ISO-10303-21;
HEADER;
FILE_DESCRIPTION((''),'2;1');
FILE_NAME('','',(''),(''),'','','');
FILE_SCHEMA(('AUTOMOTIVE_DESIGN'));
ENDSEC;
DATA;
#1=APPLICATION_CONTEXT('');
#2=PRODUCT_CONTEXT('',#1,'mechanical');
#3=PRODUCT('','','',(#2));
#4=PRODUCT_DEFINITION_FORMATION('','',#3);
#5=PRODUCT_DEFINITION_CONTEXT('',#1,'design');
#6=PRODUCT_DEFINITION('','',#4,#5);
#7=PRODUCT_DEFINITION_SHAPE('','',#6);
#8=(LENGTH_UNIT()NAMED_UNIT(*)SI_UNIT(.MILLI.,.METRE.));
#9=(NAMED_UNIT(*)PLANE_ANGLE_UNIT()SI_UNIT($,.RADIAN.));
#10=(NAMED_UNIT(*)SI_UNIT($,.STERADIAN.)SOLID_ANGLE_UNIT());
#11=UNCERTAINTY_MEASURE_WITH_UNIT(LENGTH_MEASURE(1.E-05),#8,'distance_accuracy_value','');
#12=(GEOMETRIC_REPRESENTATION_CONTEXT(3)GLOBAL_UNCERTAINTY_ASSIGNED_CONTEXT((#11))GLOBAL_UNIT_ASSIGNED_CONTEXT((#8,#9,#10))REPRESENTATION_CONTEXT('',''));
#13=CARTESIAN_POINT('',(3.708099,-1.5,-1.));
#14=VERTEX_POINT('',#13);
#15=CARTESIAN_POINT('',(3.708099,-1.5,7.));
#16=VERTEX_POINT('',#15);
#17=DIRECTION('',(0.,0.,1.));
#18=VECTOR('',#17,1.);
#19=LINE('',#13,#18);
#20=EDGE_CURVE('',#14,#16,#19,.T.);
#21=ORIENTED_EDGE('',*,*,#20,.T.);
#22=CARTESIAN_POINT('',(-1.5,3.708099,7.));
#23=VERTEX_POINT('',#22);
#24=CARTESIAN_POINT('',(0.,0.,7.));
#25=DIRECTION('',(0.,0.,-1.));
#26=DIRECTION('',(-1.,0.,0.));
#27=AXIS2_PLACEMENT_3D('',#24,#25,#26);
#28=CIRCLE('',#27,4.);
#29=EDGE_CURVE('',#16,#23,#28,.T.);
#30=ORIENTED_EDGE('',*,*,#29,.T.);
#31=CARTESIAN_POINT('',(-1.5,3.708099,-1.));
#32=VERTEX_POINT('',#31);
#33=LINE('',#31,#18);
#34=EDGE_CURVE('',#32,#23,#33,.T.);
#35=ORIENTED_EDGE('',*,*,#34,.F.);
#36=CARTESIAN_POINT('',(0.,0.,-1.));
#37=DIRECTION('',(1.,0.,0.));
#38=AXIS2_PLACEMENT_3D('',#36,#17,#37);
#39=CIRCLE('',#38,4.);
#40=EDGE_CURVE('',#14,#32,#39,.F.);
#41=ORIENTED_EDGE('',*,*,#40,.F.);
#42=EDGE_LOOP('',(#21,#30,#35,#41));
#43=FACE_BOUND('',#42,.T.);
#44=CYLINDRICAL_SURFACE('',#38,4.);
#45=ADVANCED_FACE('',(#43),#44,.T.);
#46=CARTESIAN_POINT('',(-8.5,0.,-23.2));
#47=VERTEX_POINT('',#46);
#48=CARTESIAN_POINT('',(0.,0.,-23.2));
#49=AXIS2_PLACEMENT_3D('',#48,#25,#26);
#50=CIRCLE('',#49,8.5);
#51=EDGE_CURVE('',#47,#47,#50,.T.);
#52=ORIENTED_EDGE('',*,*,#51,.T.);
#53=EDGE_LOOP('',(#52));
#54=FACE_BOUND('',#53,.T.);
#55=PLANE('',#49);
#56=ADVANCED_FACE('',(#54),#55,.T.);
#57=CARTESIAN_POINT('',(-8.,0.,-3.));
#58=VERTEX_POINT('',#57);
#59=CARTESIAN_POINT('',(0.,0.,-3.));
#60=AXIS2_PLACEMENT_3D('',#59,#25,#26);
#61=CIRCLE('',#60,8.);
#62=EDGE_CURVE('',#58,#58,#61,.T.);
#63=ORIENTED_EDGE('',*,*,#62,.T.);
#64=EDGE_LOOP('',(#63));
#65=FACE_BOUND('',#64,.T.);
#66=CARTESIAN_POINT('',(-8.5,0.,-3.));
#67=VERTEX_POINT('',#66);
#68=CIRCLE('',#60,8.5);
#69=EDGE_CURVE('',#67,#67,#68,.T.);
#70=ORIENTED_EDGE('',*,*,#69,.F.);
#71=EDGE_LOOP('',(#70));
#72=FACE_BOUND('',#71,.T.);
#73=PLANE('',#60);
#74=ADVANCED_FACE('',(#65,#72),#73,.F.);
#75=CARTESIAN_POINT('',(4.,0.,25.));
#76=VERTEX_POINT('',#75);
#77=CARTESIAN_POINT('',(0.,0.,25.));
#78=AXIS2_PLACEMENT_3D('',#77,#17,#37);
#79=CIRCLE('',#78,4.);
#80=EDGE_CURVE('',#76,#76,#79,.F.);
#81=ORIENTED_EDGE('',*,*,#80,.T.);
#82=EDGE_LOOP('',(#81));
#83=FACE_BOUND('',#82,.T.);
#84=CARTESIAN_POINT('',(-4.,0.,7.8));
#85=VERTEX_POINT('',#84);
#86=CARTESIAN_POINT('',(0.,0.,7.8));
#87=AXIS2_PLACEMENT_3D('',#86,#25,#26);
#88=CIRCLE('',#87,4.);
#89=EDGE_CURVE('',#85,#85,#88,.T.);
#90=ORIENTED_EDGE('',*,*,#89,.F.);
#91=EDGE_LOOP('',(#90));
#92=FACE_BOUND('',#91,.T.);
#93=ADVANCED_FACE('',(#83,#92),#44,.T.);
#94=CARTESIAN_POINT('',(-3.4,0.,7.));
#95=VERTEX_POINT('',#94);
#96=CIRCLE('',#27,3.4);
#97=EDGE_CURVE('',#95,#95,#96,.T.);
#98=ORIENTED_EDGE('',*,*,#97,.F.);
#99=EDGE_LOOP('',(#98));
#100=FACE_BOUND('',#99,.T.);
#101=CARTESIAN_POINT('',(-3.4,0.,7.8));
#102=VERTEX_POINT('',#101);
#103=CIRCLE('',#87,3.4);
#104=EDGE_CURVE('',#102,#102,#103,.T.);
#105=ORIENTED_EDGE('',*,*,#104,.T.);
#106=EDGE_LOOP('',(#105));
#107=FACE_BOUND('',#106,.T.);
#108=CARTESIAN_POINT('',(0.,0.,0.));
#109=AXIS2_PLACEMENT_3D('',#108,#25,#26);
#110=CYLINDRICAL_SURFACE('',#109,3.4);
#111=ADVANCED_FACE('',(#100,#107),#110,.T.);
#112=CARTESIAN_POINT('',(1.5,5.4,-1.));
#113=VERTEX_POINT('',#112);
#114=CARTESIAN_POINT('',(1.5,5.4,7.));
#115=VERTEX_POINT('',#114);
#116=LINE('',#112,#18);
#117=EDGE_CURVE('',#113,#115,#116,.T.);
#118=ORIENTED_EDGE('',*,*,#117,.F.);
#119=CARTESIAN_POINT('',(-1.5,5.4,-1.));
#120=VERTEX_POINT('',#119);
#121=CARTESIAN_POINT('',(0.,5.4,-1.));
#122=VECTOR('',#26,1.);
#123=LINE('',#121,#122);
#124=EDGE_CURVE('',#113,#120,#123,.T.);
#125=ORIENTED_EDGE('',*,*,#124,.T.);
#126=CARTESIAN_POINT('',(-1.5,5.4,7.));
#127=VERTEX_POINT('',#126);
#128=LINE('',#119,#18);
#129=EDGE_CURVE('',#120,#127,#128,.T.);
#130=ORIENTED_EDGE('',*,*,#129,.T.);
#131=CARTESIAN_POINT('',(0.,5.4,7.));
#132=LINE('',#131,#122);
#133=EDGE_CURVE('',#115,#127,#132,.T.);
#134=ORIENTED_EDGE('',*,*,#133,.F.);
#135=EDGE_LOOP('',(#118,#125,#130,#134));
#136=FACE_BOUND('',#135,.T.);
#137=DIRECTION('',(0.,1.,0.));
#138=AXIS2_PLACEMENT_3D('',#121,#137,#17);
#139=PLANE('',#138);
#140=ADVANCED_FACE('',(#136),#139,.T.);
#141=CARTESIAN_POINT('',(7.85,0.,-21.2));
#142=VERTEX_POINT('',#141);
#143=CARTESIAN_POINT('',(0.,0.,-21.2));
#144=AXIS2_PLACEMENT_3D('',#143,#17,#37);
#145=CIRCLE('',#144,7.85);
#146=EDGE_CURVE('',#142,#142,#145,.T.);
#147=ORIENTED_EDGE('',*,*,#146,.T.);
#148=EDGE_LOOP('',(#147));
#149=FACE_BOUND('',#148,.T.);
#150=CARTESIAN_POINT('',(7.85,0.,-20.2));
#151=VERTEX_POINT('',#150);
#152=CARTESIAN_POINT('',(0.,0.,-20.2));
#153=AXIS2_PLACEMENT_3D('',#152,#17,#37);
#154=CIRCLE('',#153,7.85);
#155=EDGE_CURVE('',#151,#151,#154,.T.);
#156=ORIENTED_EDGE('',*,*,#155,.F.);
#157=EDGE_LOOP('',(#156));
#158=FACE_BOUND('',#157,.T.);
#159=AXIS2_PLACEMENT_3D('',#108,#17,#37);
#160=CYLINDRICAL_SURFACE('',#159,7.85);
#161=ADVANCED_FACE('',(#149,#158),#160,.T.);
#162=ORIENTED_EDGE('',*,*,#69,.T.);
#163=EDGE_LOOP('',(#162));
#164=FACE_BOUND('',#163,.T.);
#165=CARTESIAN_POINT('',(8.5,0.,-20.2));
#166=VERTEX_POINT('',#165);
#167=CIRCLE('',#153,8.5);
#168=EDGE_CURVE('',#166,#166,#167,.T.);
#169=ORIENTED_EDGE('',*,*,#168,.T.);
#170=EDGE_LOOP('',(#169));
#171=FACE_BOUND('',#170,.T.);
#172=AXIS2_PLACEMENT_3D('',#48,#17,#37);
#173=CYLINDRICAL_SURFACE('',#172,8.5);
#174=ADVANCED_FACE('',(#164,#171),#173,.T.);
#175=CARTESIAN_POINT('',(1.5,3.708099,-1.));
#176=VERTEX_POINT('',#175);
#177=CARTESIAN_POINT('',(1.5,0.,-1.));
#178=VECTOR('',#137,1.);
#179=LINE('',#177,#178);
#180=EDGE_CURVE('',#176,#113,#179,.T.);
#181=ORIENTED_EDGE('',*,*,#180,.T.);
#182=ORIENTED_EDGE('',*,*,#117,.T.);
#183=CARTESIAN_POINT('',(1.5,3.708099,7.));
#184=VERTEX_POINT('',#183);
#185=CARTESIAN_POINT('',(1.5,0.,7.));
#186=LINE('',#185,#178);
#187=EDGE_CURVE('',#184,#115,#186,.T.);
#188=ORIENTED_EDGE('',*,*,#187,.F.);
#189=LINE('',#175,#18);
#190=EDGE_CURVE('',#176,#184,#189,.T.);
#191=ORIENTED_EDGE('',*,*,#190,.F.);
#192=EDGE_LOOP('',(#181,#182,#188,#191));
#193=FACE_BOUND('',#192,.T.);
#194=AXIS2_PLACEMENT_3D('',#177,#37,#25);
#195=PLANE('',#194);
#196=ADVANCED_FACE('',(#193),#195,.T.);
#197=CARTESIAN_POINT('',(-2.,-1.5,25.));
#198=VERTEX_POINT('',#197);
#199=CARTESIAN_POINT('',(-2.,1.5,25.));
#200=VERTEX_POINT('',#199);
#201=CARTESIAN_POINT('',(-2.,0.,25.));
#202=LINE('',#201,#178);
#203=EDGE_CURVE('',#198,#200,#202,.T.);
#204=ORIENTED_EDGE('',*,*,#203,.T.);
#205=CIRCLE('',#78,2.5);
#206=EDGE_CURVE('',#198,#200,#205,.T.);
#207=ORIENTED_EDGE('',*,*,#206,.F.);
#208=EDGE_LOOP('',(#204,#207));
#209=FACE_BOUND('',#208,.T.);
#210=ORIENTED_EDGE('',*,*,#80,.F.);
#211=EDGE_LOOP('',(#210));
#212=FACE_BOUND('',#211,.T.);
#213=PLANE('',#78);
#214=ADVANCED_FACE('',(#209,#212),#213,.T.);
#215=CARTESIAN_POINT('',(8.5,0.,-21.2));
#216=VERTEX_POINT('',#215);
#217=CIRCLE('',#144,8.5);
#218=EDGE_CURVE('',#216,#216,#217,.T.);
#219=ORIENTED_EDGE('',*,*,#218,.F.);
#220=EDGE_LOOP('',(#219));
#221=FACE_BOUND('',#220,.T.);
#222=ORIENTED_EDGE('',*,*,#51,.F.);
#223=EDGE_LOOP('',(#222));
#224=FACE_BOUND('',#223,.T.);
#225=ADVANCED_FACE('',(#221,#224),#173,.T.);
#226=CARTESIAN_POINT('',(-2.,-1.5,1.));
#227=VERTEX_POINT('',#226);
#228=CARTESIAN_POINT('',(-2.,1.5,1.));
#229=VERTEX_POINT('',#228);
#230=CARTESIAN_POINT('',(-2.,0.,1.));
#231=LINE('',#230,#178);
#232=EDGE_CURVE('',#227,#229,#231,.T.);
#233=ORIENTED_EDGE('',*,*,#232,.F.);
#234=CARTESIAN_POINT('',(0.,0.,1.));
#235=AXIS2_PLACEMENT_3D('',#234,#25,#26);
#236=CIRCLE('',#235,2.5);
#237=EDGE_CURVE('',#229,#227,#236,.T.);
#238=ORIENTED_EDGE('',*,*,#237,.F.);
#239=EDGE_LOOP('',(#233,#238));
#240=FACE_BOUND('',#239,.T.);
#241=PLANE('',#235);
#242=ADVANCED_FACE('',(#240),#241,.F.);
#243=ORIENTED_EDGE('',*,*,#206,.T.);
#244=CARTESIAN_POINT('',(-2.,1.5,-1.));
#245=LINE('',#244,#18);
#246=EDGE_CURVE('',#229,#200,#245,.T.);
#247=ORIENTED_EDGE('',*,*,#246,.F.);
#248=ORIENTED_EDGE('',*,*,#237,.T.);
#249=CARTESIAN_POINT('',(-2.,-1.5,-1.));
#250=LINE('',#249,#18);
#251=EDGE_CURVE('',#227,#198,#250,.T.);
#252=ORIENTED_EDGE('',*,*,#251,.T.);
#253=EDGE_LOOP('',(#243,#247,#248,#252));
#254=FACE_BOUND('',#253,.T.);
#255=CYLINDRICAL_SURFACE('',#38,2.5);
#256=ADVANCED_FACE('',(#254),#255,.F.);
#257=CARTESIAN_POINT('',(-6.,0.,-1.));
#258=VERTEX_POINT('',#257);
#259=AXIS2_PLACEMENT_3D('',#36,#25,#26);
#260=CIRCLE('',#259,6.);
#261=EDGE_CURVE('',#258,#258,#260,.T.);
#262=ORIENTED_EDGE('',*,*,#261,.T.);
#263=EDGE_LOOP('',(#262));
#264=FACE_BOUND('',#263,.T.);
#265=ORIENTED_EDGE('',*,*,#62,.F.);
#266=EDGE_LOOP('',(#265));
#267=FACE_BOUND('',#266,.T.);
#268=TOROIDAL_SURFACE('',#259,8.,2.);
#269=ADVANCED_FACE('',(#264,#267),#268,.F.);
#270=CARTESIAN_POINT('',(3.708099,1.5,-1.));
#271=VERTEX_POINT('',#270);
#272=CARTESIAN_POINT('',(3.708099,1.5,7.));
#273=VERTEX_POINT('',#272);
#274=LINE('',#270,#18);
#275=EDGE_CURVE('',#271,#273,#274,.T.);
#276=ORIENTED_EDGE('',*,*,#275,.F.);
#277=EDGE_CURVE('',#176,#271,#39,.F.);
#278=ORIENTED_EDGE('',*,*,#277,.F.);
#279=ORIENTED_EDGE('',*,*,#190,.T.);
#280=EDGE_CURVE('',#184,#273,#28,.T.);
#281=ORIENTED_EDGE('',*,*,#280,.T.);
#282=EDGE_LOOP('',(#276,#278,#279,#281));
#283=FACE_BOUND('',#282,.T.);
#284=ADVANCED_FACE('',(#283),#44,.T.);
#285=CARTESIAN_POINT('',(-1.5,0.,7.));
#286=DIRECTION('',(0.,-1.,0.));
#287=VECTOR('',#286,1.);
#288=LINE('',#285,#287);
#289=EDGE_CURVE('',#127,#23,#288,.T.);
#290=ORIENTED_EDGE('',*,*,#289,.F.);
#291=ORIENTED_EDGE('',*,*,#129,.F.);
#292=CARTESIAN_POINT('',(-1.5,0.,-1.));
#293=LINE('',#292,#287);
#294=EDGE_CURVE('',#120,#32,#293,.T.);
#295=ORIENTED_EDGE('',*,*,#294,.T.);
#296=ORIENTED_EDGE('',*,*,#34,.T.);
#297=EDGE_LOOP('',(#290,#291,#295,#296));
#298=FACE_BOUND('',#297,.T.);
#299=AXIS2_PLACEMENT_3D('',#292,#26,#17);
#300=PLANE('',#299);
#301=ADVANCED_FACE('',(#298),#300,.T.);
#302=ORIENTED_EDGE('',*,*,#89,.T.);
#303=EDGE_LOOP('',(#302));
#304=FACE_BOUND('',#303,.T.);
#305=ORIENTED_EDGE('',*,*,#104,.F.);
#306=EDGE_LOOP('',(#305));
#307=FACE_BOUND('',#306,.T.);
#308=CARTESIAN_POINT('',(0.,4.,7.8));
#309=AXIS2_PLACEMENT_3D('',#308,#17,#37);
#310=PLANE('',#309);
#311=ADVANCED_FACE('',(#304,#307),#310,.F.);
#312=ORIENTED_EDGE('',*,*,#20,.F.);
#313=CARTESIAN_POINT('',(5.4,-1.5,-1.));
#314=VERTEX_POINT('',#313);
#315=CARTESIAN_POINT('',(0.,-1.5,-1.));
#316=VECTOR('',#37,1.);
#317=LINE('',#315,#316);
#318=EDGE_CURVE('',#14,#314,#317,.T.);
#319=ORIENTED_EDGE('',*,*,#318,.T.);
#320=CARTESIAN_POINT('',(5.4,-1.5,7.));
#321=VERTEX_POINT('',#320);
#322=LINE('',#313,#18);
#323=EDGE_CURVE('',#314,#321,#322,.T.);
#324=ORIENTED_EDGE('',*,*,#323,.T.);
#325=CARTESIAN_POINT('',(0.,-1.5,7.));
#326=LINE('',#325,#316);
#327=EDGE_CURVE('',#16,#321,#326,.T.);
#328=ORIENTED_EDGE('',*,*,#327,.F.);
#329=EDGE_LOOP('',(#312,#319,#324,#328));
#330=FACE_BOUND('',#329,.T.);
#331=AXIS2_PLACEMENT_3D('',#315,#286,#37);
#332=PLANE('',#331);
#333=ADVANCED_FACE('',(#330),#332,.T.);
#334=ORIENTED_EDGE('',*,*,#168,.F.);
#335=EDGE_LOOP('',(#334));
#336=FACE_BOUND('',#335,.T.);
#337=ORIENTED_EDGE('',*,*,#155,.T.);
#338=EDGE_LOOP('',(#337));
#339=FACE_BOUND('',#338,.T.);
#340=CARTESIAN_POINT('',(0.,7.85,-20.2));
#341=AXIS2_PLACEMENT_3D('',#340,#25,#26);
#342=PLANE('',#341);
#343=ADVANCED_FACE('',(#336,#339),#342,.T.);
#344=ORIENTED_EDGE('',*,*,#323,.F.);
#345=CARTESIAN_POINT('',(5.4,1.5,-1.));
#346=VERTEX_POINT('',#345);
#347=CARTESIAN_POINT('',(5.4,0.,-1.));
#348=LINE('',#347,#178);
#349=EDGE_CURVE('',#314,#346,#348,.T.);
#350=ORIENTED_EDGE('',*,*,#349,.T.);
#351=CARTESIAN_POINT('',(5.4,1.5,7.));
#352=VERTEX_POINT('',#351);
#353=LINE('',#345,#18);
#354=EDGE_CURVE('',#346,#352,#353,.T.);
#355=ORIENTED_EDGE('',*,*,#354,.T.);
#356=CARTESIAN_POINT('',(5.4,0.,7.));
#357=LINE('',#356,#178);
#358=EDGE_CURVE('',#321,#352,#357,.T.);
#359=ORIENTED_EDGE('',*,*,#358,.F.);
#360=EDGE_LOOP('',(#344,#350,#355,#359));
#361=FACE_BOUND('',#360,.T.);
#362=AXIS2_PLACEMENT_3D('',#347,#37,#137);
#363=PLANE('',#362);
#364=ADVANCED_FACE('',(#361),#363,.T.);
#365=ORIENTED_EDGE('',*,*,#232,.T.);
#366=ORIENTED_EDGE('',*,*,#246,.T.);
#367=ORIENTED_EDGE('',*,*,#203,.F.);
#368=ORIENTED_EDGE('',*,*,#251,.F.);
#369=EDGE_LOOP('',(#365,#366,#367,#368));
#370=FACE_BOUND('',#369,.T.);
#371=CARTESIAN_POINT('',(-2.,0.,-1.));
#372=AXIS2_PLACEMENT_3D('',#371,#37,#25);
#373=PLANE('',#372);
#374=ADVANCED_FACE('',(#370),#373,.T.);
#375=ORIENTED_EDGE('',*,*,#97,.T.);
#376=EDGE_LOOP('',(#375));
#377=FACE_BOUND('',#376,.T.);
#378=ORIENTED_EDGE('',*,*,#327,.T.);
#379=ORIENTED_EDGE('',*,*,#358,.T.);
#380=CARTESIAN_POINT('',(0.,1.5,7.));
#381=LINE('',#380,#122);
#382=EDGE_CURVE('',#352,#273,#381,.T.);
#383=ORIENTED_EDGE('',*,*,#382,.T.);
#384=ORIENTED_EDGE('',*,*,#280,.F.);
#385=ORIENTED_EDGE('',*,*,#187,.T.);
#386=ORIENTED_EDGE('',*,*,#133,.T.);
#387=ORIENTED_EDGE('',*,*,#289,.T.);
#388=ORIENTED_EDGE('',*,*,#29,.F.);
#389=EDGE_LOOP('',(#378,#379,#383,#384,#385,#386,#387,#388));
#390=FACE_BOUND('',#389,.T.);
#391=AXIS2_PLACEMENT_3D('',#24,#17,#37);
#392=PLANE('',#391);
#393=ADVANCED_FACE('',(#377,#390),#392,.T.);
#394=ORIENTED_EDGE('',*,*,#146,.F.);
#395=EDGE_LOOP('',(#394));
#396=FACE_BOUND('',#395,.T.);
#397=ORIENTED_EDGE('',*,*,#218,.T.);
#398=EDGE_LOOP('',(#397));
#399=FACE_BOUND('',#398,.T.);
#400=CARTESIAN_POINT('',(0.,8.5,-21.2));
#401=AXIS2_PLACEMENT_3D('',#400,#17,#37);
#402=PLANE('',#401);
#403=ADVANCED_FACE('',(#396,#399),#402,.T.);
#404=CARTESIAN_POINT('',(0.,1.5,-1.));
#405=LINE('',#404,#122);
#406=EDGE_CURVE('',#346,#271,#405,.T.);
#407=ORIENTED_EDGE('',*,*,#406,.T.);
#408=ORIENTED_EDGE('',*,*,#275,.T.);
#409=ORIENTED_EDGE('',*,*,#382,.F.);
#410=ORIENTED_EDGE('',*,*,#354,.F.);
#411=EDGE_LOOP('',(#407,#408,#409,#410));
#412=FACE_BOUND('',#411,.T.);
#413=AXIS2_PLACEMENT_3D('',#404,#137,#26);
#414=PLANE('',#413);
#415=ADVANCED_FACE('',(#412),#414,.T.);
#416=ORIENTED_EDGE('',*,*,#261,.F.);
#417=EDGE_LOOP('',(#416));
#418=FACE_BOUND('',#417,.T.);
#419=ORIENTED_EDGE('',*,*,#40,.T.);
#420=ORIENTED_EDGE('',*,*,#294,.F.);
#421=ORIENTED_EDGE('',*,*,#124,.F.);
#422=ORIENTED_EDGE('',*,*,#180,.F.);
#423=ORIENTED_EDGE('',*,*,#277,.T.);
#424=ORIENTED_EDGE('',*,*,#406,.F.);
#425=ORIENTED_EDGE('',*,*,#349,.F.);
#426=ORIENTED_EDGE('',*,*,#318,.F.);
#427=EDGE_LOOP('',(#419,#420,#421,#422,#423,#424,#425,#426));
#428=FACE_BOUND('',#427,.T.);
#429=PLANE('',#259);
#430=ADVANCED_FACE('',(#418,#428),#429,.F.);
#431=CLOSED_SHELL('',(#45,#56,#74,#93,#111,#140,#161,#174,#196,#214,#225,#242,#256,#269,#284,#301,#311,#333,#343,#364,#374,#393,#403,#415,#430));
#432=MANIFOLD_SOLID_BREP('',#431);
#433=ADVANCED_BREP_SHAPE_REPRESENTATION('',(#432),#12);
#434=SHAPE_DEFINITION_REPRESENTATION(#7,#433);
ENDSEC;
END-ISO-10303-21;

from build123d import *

# Parameters (mm, degrees)
EXTRUDE_1_DEPTH      = 25
EXTRUDE_1_DEPTH_BACK = 1
SKETCH_1_R           = 4
EXTRUDE_2_DEPTH      = 7
EXTRUDE_2_DEPTH_BACK = 1
SKETCH_2_R           = 2.5
EXTRUDE_3_DEPTH      = 2
EXTRUDE_START        = 2
SKETCH_2_3_R         = 6
SKETCH_2_3_R_2       = 2.5
EXTRUDE_4_DEPTH      = 2
SKETCH_4_W           = 0.8
SKETCH_4_H           = 0.6
SKETCH_5_R           = 8.5
EXTRUDE_5_DEPTH      = 20.2
SKETCH_6_W           = 1
SKETCH_6_H           = 0.65
FILLET_2_R           = 2


with BuildPart() as part:
    # 草图1 → 凸台-拉伸1 (new, two sides: drawn at the far end of the back side and taken through both)
    with BuildSketch(Plane.XY.offset(-EXTRUDE_1_DEPTH_BACK)):
        Circle(SKETCH_1_R)
        with BuildLine():
            Line((-2, -1.5), (-2, 1.5))
            ThreePointArc((-2, 1.5), (2.5, 0), (-2, -1.5))
        make_face(mode=Mode.SUBTRACT)
    extrude(amount=EXTRUDE_1_DEPTH + EXTRUDE_1_DEPTH_BACK)

    # 草图1<3> → 凸台-拉伸2 (add, two sides: drawn at the far end of the back side and taken through both)
    with BuildSketch(Plane.XY.offset(-EXTRUDE_2_DEPTH_BACK)):
        with BuildLine():
            Line((-1.5, 5.4), (-1.5, 3.708099244))
            ThreePointArc((-1.5, 3.708099244), (0, 4), (1.5, 3.708099244))
            Line((1.5, 3.708099244), (1.5, 5.4))
            Line((1.5, 5.4), (-1.5, 5.4))
        make_face()
        with BuildLine():
            Line((5.4, 1.5), (3.708099244, 1.5))
            ThreePointArc((3.708099244, 1.5), (4, 0), (3.708099244, -1.5))
            Line((3.708099244, -1.5), (5.4, -1.5))
            Line((5.4, -1.5), (5.4, 1.5))
        make_face()
    extrude(amount=EXTRUDE_2_DEPTH + EXTRUDE_2_DEPTH_BACK)

    # 草图2 → 凸台-拉伸3 (add)
    with BuildSketch(Plane(origin=(0, 0, -1), x_dir=(-1, 0, 0), z_dir=(0, 0, -1))):
        Circle(SKETCH_2_R)
    extrude(amount=-EXTRUDE_3_DEPTH)

    # 草图2<3> → 凸台-拉伸4 (add)
    # profile 1 of 2: a face of its own
    with BuildSketch(Plane(origin=(0, 0, -1), x_dir=(-1, 0, 0), z_dir=(0, 0, -1)).offset(EXTRUDE_START)):
        Circle(SKETCH_2_3_R)
        Circle(SKETCH_2_3_R_2, mode=Mode.SUBTRACT)
    # profile 2 of 2: a face of its own
    with BuildSketch(Plane(origin=(0, 0, -1), x_dir=(-1, 0, 0), z_dir=(0, 0, -1)).offset(EXTRUDE_START)):
        Circle(SKETCH_2_3_R_2)
    extrude(amount=-EXTRUDE_4_DEPTH)

    # 草图4 → 切除-旋转3 (revolve, cut)
    with BuildSketch(Plane(origin=(0, 0, 0), x_dir=(0, 0, -1), z_dir=(1, 0, 0)), mode=Mode.PRIVATE) as cut_revolve_3_sk:
        with Locations((-7.4, 3.7)):
            Rectangle(SKETCH_4_W, SKETCH_4_H)
    revolve(cut_revolve_3_sk.sketch.rotate(Axis((0, 0, 0), (0, 0, 1)), 90), axis=Axis((0, 0, 0), (0, 0, 1)), mode=Mode.SUBTRACT)

    # 草图5 → 凸台-拉伸5 (add)
    with BuildSketch(Plane(origin=(0, 0, -3), x_dir=(-1, 0, 0), z_dir=(0, 0, -1))):
        Circle(SKETCH_5_R)
    extrude(amount=EXTRUDE_5_DEPTH)

    # 草图6 → 切除-旋转4 (revolve, cut)
    with BuildSketch(Plane(origin=(0, 0, 0), x_dir=(0, 0, -1), z_dir=(1, 0, 0)), mode=Mode.PRIVATE) as cut_revolve_4_sk:
        with Locations((20.7, 8.175)):
            Rectangle(SKETCH_6_W, SKETCH_6_H)
    revolve(cut_revolve_4_sk.sketch.rotate(Axis((0, 0, 0), (0, 0, -1)), 90), axis=Axis((0, 0, 0), (0, 0, -1)), mode=Mode.SUBTRACT)

    # 圆角2
    fillet_2_edges = [part.edges().sort_by_distance(p)[0] for p in [
        (6, 0, -3),
    ]]
    fillet(fillet_2_edges, radius=FILLET_2_R - 0.0001)  # a hair under: the kernel refuses the full size


solid = part.part
